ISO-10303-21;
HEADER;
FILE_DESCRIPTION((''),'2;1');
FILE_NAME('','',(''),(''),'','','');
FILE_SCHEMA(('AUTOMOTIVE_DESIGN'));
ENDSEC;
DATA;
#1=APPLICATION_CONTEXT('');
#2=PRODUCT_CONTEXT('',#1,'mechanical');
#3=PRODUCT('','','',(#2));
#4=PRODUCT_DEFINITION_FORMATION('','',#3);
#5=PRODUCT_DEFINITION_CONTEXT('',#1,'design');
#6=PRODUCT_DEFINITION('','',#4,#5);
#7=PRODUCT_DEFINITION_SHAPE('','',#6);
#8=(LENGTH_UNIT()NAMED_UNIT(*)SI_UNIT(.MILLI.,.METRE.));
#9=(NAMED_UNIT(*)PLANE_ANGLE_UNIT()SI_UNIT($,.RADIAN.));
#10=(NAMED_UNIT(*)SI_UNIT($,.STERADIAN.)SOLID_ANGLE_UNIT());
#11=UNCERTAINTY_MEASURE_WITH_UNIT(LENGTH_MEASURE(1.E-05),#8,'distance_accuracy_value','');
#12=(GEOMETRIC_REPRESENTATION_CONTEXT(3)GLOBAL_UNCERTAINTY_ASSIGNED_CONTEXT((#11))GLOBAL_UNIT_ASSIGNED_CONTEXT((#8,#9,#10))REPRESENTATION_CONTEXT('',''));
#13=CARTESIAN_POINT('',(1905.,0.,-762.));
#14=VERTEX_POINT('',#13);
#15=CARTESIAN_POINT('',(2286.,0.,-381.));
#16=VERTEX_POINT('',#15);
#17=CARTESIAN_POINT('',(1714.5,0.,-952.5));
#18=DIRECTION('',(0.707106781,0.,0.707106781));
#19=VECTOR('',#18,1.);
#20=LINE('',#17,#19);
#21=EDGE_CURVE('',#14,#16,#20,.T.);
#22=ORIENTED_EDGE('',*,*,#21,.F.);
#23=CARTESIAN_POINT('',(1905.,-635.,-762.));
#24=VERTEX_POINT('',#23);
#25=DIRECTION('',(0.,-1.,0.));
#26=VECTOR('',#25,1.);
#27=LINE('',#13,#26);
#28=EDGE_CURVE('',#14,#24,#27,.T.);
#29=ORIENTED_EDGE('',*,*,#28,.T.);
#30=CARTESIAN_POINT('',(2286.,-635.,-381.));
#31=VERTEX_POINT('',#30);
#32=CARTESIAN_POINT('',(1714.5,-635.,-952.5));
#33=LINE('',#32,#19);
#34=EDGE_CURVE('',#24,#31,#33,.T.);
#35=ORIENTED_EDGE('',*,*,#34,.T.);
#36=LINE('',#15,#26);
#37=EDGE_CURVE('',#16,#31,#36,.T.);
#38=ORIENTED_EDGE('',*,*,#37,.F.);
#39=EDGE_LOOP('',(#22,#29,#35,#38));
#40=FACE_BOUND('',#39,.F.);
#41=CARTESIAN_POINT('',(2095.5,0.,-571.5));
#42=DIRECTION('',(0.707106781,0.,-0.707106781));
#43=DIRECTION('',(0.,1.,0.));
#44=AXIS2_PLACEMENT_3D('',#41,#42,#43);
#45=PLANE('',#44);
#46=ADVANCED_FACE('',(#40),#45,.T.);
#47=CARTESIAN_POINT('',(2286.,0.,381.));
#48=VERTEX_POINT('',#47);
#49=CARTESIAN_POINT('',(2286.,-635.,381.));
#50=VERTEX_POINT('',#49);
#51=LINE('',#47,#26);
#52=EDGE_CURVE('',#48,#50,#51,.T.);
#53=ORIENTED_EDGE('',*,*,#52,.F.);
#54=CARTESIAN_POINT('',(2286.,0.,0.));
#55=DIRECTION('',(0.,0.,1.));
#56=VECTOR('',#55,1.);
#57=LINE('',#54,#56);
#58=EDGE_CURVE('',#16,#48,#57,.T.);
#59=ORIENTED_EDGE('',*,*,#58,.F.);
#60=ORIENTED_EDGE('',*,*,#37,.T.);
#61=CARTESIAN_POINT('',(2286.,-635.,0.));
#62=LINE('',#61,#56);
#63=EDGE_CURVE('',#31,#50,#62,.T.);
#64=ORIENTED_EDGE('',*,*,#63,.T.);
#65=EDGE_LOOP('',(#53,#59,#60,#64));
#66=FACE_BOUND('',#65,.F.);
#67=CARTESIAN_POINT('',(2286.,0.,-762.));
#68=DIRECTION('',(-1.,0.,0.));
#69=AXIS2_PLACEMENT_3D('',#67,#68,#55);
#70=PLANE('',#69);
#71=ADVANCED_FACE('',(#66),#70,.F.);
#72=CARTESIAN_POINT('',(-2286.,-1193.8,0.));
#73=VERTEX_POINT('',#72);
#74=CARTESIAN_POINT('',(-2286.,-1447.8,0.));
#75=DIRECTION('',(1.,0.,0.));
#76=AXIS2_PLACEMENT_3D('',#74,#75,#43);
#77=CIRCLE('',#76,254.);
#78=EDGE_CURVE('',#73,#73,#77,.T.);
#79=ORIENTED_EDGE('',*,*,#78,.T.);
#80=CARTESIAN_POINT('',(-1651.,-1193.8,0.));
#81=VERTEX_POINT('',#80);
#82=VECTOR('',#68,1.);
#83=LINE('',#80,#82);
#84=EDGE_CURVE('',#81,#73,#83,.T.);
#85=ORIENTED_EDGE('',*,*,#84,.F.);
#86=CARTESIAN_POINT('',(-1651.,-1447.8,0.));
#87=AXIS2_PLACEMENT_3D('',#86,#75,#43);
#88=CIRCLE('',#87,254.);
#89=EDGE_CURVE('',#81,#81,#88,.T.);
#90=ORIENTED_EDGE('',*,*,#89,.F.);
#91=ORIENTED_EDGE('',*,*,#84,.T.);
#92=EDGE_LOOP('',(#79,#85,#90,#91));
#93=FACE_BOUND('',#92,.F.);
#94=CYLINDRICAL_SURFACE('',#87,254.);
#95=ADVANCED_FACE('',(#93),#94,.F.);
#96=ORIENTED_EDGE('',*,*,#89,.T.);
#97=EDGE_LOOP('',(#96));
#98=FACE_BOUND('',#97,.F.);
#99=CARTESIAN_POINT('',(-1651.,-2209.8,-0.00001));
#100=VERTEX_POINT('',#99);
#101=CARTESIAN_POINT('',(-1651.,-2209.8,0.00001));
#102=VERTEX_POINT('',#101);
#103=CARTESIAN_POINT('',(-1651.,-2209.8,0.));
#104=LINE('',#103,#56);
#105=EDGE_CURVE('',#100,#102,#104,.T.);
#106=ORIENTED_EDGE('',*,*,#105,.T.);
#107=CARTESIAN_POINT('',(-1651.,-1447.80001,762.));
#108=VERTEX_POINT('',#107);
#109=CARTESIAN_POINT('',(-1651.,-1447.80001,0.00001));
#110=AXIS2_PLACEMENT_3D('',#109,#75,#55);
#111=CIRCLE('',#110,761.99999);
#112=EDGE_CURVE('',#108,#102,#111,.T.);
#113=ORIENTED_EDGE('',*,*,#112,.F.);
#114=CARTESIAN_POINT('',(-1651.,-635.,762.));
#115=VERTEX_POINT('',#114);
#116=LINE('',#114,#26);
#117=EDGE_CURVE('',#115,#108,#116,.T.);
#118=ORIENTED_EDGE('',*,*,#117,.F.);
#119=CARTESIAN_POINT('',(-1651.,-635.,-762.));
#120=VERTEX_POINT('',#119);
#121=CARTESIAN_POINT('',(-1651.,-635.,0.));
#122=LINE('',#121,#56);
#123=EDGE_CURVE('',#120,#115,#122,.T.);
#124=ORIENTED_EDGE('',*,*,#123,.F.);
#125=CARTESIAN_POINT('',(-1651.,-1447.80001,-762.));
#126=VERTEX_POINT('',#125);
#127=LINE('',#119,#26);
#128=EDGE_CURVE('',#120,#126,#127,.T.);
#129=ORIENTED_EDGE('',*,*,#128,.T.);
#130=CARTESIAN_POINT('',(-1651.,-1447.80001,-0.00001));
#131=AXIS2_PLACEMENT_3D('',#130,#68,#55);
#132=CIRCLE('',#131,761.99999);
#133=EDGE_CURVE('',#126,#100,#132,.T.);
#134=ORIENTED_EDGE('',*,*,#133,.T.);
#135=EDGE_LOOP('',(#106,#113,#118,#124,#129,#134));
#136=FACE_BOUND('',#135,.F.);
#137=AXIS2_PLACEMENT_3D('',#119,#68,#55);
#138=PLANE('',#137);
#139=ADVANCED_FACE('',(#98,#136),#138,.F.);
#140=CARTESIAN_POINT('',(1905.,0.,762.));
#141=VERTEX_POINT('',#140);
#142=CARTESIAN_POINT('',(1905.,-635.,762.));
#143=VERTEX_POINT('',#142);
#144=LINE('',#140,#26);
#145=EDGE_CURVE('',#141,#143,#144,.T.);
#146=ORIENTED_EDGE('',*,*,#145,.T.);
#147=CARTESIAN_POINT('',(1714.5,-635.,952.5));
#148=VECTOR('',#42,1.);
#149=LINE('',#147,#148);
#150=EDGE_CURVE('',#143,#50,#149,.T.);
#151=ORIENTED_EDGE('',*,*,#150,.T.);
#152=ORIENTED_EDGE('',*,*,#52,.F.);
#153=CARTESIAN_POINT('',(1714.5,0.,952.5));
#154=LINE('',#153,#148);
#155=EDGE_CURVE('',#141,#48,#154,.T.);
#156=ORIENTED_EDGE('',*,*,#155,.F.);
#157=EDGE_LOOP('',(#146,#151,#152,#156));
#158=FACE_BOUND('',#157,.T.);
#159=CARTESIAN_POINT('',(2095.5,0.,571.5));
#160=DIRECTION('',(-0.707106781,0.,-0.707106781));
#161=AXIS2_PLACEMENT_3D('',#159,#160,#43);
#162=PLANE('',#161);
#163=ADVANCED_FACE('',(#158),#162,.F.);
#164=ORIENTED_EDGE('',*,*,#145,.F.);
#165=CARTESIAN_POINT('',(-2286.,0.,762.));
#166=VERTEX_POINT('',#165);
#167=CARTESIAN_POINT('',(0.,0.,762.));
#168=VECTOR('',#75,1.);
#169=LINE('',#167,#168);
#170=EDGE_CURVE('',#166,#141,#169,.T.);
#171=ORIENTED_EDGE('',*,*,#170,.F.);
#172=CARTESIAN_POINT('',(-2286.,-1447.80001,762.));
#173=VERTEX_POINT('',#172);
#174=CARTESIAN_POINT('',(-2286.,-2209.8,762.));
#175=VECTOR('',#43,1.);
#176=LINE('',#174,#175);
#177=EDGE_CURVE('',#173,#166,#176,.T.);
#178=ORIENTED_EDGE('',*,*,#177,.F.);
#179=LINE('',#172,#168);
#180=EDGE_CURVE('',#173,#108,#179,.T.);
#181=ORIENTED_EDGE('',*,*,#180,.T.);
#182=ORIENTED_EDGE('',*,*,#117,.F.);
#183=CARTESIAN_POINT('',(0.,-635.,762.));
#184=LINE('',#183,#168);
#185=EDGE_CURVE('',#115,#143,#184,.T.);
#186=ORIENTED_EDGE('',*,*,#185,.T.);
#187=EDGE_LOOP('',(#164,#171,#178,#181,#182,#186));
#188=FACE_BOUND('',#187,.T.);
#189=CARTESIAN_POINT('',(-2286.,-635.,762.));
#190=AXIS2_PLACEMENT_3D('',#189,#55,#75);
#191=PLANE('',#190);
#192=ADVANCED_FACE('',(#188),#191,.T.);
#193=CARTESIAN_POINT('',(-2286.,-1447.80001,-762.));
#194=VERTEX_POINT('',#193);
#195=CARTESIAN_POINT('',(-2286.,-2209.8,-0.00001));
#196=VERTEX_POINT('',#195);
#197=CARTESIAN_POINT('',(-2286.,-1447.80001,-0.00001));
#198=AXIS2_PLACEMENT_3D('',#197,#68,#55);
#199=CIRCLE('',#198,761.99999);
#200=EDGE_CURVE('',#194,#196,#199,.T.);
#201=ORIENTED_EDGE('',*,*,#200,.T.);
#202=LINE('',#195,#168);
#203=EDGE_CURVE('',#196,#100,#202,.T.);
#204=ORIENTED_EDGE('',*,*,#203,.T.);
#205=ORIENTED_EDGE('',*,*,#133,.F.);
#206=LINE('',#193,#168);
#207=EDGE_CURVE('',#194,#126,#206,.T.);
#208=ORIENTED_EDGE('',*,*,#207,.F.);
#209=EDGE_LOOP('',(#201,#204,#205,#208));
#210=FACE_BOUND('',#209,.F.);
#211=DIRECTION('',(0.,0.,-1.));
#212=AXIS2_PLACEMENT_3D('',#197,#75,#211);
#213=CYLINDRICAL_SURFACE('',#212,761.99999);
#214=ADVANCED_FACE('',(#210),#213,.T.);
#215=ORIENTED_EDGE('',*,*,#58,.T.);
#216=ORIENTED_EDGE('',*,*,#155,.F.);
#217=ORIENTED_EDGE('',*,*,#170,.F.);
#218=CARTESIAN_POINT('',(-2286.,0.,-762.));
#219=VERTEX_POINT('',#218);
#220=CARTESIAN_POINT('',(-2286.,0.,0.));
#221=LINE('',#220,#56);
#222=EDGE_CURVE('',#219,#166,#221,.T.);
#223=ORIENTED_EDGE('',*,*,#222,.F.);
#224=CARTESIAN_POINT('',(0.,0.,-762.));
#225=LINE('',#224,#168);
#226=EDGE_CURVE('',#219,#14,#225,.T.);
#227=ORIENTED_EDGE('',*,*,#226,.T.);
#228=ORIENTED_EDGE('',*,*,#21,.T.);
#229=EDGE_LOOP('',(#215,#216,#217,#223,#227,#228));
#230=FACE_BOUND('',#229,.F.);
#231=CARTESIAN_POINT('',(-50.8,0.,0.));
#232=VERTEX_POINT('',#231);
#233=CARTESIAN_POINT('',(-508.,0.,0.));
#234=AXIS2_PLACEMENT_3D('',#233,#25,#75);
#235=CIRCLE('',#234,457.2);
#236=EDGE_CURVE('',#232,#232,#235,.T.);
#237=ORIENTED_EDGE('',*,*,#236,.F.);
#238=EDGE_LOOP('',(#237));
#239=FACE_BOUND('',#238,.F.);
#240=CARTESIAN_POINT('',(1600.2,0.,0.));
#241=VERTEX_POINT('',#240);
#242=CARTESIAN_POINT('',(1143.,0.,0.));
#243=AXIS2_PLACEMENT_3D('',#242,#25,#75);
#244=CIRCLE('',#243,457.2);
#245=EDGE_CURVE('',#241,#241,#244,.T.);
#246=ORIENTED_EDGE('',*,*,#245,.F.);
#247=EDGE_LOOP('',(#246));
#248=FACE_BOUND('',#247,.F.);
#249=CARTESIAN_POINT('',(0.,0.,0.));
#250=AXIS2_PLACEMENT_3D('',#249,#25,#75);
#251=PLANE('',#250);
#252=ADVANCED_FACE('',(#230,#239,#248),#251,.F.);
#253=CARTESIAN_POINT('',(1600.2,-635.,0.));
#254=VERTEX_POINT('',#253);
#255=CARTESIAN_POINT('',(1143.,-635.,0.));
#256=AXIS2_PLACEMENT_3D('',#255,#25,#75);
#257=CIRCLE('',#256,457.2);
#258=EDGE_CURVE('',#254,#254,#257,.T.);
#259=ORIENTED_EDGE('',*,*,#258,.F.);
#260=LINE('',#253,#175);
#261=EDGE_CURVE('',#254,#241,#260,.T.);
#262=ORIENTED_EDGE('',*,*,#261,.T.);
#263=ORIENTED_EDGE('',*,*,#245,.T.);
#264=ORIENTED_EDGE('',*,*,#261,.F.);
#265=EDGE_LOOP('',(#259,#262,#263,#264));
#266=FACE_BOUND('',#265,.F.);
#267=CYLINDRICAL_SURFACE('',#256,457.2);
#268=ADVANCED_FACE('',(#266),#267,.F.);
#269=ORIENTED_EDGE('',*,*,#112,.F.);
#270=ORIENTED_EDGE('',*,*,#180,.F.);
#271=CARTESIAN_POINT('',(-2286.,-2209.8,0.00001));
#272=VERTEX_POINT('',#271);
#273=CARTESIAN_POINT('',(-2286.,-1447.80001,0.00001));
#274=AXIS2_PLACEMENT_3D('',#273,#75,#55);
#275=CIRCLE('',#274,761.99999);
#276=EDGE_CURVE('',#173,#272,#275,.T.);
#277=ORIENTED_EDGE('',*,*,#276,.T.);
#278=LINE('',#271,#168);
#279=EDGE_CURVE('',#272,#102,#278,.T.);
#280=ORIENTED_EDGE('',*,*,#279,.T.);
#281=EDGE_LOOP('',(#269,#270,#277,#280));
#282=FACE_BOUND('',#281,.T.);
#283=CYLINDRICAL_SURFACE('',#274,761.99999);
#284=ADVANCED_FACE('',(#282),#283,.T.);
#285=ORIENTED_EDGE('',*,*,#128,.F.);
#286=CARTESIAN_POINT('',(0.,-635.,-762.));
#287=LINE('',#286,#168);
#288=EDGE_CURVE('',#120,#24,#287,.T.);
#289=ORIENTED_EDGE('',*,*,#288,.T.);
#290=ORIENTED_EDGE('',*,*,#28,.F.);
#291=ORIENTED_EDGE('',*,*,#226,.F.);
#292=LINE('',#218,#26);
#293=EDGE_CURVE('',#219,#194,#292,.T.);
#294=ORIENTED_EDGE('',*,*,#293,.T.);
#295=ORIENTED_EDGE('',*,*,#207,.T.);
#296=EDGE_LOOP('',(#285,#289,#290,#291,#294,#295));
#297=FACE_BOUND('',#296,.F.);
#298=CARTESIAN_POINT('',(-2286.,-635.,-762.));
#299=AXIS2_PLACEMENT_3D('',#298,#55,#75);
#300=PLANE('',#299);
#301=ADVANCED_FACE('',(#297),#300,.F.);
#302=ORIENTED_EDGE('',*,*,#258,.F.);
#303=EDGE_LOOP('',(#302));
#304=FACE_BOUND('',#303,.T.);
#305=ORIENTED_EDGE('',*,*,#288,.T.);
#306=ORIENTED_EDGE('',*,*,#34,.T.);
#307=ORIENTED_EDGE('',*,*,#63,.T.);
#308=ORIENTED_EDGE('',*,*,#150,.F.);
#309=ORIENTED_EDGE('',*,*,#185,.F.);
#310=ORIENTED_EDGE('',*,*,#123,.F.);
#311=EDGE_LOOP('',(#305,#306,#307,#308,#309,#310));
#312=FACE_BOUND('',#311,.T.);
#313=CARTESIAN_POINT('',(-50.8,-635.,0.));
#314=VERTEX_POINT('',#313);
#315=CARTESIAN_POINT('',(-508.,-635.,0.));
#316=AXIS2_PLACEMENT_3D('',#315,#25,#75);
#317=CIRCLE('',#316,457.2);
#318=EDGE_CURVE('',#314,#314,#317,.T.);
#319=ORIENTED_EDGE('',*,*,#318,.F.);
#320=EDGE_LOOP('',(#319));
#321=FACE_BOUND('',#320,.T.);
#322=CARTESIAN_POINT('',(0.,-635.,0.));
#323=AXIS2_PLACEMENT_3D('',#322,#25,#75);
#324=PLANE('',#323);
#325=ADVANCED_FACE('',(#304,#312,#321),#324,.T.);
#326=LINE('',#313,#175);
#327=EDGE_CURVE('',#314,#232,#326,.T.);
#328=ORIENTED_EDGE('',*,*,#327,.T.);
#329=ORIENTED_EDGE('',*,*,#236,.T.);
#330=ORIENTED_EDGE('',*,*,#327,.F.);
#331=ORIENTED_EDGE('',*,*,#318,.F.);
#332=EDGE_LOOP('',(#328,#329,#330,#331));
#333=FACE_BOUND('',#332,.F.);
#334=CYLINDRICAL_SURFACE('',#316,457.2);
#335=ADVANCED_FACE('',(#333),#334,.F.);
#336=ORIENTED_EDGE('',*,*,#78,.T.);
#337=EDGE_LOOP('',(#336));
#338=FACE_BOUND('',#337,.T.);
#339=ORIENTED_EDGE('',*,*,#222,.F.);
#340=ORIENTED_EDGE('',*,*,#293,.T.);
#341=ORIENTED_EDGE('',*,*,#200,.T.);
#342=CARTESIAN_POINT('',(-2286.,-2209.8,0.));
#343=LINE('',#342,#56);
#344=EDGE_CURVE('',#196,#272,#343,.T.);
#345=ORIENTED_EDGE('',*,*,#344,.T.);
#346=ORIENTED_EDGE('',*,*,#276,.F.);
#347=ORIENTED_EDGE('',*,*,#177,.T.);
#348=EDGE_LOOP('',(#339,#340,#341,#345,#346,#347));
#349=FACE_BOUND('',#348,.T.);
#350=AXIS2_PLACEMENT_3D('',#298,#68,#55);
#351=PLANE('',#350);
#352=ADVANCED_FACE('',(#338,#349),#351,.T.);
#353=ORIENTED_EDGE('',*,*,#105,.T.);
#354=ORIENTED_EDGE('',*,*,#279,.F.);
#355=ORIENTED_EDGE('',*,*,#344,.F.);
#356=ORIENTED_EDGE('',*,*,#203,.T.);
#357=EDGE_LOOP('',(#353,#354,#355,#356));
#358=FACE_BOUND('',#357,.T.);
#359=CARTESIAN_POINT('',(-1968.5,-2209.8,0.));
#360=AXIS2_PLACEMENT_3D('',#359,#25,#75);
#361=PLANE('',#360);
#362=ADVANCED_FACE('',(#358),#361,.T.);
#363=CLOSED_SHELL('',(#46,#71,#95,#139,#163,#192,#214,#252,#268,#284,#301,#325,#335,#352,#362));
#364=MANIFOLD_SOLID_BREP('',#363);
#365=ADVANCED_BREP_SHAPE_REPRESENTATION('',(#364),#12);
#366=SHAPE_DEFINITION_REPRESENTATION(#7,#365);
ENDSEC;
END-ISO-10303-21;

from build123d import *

# Parameters (mm, degrees)
F0_W     = 4572
F0_H     = 1524
F1_DEPTH = 635
F2_W     = 635
F2_H     = 1524
F3_DEPTH = 1574.8
F4_R     = 761.99999
F5_R     = 457.2
F6_DEPTH = 635
F7_R     = 254
F8_DEPTH = 635.001
F9_SIZE  = 381


# Not quite as in the source:
# - a fillet or chamfer is up to 0.001 mm smaller than in the source, because OpenCascade refuses the exact size


with BuildPart() as f1:
    # F0 (on Front) → F1 (new body)
    with BuildSketch(Plane.XZ):
        Rectangle(F0_W, F0_H)
    extrude(amount=F1_DEPTH)

    # F2 (on face) → F3 (join)
    with BuildSketch(Plane.XZ.offset(635)):
        with Locations((-1968.5, 0)):
            Rectangle(F2_W, F2_H)
    extrude(amount=F3_DEPTH)

    # F4 (radius 762 in the source; OpenCascade refuses exactly that, so slightly less here)
    f4_edges = [f1.edges().sort_by_distance(p)[0] for p in [
        (-1968.5, -2209.8, 762),
        (-1968.5, -2209.8, -762),
    ]]
    fillet(f4_edges, radius=F4_R)

    # F5 (on face) → F6 (cut)
    with BuildSketch(Plane.XZ.offset(635)):
        with Locations((-508, 0)):
            Circle(F5_R)
        with Locations((1143, 0)):
            Circle(F5_R)
    extrude(amount=-F6_DEPTH, mode=Mode.SUBTRACT)

    # F7 (on face) → F8 (cut, through all)
    with BuildSketch(Plane.YZ.offset(-1651)):
        with Locations((-1447.8, 0)):
            Circle(F7_R)
    extrude(amount=-F8_DEPTH, mode=Mode.SUBTRACT)

    # F9
    f9_edges = [f1.edges().sort_by_distance(p)[0] for p in [
        (2286, -317.5, -762),
        (2286, -317.5, 762),
    ]]
    chamfer(f9_edges, length=F9_SIZE)


solid = f1.part
